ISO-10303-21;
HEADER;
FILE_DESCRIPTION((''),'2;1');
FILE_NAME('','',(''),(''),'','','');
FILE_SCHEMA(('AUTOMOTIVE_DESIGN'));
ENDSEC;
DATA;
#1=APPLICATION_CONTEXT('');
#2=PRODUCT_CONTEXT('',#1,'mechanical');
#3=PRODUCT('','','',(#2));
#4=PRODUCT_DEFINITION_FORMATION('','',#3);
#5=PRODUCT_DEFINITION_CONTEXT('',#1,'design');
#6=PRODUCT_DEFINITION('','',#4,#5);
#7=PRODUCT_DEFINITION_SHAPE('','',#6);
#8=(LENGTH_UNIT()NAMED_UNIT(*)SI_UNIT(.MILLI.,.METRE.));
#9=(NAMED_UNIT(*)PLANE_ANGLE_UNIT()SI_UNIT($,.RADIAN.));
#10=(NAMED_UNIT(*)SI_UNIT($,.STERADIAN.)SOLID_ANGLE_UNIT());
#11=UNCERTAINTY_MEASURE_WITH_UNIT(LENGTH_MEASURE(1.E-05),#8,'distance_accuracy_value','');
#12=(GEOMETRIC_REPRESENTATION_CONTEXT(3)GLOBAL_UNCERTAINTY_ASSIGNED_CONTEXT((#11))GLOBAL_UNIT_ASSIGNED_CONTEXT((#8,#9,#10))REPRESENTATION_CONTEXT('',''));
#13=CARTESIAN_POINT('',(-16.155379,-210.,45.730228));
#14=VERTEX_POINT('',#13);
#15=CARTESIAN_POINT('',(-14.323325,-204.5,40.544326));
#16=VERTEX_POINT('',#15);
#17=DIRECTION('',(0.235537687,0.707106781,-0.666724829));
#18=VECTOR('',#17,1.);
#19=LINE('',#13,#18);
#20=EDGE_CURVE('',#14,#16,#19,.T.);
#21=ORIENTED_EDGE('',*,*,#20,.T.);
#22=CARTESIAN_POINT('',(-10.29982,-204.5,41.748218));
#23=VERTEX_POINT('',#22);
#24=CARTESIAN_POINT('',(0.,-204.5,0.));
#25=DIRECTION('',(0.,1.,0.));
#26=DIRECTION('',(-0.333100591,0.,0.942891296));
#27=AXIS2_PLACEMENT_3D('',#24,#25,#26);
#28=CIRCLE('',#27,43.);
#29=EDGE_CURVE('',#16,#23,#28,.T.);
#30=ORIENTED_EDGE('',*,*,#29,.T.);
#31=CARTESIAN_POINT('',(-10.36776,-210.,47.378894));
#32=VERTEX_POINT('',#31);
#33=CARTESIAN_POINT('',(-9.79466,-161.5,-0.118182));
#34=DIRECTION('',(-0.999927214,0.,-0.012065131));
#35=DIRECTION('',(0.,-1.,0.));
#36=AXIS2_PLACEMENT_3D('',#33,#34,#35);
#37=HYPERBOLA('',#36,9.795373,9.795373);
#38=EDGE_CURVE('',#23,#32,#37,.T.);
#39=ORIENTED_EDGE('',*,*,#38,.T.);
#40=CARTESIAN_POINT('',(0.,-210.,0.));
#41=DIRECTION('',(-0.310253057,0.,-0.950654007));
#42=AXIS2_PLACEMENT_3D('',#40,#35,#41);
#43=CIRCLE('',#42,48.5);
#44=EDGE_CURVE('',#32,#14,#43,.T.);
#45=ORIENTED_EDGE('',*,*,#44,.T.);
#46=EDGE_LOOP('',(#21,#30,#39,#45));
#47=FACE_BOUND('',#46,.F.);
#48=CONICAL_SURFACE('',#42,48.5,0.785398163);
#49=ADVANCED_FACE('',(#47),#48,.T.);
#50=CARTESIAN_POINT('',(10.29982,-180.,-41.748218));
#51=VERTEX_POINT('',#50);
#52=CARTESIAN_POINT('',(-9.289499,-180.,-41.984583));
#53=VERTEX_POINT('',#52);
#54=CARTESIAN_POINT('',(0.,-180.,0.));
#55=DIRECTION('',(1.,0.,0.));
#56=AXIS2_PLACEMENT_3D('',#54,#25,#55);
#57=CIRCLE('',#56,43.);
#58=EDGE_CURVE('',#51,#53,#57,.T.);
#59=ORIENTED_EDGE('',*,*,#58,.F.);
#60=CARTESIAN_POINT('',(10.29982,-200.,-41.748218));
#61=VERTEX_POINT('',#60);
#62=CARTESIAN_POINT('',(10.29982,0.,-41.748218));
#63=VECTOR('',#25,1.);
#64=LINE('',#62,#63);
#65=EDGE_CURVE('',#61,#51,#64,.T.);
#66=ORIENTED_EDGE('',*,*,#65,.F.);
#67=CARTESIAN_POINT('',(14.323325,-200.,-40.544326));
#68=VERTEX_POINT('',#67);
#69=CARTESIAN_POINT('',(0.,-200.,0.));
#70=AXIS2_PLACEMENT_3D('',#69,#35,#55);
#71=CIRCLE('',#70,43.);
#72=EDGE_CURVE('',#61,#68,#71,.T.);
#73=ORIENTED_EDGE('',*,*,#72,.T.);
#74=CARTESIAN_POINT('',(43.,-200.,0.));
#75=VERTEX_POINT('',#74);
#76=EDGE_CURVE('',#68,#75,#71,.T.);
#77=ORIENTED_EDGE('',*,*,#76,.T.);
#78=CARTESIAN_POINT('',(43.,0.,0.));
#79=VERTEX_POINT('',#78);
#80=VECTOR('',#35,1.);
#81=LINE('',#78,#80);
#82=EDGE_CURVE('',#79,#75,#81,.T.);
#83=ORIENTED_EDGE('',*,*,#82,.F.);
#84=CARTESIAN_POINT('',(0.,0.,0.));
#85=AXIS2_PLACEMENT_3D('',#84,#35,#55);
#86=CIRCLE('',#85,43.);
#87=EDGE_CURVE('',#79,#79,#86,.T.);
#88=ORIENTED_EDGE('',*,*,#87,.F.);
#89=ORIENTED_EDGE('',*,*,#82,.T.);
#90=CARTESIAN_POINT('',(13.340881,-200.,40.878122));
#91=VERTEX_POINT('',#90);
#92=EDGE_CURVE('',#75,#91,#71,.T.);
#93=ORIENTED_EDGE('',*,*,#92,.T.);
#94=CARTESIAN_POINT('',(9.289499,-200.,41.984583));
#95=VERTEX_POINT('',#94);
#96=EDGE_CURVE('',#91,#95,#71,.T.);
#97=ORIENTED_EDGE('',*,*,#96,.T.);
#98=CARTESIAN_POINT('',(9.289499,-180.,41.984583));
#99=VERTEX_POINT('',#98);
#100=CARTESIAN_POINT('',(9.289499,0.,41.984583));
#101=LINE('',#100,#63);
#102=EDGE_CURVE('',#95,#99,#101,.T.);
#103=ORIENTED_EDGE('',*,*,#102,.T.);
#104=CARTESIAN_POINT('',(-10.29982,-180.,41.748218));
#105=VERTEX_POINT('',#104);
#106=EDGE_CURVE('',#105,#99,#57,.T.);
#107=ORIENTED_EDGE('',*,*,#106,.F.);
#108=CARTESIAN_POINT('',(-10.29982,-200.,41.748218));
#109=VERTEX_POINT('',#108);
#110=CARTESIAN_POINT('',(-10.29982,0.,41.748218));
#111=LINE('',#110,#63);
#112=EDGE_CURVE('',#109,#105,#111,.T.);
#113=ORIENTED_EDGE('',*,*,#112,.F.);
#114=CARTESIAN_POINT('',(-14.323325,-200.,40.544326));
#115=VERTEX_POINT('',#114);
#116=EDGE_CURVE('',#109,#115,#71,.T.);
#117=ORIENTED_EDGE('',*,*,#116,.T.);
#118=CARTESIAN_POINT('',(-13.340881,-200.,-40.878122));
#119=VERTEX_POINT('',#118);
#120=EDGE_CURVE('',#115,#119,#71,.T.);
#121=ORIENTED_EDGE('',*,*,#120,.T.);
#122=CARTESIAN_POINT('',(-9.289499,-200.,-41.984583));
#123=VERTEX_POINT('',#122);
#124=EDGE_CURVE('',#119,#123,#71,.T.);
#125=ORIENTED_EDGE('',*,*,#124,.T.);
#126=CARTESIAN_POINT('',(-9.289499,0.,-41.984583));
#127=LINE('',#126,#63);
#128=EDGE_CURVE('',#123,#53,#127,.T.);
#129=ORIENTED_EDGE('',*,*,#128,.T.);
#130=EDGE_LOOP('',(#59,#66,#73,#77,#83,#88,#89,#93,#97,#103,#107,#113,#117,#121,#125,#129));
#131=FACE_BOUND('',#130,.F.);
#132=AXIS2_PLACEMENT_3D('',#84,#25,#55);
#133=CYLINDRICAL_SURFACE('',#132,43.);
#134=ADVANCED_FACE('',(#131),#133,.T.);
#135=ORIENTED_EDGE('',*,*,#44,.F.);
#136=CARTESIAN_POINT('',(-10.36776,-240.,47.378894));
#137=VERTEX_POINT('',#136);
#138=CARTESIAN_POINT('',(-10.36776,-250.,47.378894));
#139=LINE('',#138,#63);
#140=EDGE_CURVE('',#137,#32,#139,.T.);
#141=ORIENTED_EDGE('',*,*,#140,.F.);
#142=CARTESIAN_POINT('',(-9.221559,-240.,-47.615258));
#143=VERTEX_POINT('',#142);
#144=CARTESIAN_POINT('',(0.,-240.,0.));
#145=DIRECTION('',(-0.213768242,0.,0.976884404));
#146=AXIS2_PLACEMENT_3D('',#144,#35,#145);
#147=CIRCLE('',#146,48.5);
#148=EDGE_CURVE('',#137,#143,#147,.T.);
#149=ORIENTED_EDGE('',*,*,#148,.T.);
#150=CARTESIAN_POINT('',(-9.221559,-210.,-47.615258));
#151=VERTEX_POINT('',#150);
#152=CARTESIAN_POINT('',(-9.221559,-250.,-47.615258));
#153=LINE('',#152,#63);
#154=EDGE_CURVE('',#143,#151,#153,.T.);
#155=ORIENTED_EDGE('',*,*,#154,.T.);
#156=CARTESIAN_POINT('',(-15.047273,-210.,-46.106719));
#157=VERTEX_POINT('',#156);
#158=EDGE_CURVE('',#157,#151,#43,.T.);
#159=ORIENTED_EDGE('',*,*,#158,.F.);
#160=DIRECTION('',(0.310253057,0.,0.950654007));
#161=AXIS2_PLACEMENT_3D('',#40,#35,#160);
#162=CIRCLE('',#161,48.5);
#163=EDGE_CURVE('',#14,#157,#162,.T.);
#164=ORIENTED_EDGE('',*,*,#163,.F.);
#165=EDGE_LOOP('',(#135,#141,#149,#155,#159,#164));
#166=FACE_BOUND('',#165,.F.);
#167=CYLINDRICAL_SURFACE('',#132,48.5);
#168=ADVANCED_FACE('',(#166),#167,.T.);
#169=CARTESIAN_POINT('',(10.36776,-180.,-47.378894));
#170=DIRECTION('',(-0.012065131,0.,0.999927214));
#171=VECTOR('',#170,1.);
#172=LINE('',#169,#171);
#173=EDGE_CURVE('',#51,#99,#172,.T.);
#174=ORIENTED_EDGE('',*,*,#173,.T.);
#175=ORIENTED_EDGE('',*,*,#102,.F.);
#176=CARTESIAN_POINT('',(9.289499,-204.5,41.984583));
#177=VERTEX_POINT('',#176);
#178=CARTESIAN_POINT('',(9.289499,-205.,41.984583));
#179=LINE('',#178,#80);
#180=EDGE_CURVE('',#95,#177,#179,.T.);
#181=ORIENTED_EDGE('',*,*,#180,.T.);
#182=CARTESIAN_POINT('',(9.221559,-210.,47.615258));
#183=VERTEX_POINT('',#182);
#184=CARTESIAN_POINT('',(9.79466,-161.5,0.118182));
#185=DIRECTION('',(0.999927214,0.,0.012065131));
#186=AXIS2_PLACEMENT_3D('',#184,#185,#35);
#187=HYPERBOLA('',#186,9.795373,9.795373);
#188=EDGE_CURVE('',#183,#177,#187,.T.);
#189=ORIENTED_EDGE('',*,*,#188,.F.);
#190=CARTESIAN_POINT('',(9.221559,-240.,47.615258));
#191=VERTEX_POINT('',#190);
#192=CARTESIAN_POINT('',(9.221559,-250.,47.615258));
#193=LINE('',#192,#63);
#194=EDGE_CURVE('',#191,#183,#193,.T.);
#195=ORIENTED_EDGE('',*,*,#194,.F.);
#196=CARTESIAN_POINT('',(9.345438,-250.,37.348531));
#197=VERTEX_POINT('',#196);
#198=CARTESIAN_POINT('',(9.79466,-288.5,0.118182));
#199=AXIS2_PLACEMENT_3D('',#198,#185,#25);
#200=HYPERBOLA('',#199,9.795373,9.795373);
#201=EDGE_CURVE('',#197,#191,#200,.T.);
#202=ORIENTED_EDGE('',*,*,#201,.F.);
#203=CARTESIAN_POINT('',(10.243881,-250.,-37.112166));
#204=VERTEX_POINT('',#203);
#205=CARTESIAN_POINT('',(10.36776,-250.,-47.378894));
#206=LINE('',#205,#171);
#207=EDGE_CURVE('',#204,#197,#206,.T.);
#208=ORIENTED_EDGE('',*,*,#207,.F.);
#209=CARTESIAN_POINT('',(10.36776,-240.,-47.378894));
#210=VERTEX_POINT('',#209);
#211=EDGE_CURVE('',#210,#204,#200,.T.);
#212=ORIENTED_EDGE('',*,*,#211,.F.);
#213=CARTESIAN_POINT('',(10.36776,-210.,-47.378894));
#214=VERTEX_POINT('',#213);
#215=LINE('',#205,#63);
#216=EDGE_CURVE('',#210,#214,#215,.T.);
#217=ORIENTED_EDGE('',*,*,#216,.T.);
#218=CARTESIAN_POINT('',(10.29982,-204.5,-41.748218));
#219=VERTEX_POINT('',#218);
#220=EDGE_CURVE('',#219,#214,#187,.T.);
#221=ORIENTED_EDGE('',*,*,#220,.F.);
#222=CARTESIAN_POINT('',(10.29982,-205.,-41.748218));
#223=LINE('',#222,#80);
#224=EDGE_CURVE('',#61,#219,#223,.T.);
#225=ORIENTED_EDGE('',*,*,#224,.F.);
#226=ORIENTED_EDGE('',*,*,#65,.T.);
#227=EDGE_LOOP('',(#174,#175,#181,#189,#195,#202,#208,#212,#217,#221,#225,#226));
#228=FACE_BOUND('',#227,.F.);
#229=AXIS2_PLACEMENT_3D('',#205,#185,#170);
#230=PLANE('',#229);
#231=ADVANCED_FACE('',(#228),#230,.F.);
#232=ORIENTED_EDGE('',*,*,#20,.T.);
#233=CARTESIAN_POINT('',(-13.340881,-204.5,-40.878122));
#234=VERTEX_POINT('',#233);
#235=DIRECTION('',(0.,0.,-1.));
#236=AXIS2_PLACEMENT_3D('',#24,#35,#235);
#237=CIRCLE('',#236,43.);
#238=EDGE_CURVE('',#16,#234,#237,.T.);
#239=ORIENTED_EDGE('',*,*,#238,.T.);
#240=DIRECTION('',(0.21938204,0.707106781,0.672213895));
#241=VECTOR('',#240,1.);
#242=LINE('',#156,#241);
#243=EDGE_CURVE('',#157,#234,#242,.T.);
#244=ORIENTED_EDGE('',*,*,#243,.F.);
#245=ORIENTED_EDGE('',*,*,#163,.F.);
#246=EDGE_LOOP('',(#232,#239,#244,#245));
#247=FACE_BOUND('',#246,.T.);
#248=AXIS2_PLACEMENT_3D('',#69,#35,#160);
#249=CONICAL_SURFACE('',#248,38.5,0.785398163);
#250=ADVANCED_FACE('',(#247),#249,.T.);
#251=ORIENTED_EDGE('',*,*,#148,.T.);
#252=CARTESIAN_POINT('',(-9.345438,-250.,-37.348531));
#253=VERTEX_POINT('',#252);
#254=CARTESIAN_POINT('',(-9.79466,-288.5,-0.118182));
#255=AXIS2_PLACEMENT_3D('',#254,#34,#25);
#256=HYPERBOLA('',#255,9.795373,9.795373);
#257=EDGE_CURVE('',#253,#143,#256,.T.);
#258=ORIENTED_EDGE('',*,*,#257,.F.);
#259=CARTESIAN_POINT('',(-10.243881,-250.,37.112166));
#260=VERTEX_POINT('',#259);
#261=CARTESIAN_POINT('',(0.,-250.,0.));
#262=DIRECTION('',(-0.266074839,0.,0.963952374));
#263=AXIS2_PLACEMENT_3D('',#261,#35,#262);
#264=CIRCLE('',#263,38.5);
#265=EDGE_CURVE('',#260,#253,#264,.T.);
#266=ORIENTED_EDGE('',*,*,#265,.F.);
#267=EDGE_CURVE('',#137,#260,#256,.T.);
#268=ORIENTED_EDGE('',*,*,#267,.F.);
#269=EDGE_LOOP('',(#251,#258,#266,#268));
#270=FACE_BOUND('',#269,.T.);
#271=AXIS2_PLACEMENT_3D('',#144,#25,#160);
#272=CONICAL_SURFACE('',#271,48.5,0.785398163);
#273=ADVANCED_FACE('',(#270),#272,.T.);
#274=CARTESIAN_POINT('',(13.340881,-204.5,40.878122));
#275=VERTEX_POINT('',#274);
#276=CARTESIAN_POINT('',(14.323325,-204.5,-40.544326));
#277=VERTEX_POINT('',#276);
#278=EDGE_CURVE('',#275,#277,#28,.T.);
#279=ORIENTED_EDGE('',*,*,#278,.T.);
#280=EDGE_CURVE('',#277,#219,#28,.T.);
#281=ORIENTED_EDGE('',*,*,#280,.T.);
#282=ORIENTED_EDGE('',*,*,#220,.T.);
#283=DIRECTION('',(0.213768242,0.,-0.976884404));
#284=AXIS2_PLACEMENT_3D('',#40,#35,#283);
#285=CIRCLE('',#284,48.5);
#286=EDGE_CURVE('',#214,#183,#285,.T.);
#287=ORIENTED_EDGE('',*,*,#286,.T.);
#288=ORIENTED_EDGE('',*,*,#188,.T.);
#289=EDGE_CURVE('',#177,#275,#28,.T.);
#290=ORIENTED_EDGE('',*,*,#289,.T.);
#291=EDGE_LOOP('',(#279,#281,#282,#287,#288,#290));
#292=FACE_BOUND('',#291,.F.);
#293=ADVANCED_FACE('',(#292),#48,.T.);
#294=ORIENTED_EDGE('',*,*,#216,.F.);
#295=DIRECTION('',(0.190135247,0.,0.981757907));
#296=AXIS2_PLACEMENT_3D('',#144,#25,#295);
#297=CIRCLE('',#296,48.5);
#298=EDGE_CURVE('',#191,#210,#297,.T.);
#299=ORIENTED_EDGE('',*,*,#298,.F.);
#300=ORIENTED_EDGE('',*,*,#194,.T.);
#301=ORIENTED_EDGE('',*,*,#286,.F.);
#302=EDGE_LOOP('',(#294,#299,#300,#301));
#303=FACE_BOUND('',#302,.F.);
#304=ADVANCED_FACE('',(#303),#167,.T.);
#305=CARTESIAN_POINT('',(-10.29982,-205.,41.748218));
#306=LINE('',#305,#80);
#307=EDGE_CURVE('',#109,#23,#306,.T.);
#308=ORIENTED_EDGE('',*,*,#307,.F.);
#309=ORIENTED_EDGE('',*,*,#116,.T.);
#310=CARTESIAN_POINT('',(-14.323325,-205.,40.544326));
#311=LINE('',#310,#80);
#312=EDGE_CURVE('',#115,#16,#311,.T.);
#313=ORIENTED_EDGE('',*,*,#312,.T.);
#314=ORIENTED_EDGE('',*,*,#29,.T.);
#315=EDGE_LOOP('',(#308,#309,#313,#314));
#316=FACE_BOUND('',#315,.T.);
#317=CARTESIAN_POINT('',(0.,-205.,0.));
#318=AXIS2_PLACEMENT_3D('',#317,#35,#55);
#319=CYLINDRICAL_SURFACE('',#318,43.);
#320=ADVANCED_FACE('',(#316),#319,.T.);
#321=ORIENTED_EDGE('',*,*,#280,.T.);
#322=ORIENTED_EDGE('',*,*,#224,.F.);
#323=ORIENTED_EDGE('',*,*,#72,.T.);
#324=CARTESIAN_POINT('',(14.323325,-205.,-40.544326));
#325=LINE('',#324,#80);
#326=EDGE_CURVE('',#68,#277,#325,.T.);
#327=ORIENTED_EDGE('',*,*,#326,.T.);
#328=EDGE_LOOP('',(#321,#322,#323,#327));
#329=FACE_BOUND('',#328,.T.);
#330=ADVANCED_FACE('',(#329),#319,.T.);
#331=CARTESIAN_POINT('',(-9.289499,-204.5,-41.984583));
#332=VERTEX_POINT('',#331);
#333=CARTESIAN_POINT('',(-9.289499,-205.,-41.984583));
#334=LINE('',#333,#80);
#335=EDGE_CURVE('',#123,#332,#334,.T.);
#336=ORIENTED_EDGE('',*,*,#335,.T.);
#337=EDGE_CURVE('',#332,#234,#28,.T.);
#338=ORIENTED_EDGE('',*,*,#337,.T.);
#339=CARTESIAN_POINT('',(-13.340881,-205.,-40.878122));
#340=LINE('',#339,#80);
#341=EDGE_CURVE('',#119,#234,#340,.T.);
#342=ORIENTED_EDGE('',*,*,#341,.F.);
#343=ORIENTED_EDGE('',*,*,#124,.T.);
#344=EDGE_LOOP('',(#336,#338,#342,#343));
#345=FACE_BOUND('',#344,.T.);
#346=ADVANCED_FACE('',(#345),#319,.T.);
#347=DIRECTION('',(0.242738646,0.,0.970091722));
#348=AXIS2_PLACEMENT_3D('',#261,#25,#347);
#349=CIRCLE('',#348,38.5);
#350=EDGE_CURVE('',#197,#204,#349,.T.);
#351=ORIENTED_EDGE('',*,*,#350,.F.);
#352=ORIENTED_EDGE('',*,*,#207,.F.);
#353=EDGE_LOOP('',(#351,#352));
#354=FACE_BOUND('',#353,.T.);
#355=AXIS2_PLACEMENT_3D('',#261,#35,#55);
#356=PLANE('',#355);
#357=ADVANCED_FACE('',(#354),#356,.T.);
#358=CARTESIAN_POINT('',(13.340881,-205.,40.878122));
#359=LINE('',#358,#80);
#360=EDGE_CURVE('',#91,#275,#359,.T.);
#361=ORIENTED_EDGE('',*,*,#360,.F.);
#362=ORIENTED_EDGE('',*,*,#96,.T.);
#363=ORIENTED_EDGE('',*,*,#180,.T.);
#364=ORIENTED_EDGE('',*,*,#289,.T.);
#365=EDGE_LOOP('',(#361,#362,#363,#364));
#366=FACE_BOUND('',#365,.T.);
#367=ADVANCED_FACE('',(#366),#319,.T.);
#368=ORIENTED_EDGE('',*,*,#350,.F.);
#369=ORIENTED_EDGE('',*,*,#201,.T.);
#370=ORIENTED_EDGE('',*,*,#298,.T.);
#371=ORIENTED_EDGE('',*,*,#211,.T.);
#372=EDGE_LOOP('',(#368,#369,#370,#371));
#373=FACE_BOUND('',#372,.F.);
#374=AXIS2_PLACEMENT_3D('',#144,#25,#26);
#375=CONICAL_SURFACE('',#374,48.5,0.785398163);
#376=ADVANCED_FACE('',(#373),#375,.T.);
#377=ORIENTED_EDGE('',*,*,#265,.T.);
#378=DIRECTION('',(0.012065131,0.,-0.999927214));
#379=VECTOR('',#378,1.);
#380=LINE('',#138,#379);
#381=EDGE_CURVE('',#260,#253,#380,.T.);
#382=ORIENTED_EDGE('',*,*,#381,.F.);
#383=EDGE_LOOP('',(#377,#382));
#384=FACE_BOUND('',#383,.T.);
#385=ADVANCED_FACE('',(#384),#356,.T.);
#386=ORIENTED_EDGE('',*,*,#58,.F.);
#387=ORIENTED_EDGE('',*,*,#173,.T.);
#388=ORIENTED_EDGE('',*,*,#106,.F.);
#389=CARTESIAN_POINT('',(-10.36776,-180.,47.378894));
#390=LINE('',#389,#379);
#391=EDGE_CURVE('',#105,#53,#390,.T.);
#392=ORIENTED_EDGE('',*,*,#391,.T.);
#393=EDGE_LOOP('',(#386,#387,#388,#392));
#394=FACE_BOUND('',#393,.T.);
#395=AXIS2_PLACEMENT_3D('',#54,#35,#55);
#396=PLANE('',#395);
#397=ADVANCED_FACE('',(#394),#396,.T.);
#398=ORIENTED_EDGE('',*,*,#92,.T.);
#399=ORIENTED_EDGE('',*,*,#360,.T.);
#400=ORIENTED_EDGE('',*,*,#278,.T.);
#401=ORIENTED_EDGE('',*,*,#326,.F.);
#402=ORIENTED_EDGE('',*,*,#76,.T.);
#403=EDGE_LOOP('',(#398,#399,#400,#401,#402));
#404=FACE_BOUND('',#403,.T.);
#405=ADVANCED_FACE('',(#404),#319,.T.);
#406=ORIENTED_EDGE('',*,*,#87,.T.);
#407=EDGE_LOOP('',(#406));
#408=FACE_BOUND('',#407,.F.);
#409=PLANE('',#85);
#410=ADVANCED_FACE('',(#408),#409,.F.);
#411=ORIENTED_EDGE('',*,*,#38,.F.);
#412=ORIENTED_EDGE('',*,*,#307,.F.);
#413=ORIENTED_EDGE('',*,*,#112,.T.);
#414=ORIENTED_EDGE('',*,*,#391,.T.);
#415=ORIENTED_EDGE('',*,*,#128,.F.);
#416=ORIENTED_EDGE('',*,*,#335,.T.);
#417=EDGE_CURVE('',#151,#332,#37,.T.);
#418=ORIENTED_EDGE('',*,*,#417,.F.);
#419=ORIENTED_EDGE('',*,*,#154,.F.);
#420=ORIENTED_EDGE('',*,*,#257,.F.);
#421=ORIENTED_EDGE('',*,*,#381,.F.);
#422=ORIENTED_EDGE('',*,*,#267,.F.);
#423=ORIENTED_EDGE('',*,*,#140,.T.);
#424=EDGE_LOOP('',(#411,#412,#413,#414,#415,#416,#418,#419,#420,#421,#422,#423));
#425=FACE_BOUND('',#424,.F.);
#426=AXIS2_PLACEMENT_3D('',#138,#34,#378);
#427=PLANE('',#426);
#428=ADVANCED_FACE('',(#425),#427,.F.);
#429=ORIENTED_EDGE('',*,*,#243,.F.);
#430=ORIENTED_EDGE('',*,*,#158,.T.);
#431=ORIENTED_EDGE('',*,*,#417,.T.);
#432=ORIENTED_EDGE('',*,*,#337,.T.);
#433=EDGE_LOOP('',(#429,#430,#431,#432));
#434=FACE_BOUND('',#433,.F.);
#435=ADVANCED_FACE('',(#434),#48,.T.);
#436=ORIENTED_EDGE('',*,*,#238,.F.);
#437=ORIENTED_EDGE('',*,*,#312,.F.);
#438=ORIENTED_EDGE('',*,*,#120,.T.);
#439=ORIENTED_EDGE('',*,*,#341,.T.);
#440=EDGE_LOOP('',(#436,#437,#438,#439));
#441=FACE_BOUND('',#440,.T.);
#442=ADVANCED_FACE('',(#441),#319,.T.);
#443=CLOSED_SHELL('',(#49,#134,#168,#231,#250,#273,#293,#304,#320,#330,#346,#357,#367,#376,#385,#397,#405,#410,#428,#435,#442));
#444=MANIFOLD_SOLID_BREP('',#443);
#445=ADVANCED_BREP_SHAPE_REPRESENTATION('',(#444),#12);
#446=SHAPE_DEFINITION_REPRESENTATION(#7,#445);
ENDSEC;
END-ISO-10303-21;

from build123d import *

# Parameters (mm, degrees)
F0_R         = 48.5
F0_R_2       = 43
F1_DEPTH     = 250
F2_DEPTH     = 200
F4_DEPTH     = 70
F5_T2_ANGLE  = 217.5315587112
F5_T4_ANGLE  = 217.5315587112
F5_T8_ANGLE  = 217.5315587112
F5_S9_R      = 43
F5_T10_DEPTH = 60
F5_T14_ANGLE = 217.5315587112
F5_S15_R     = 43
F5_T16_DEPTH = 60


# Not quite as in the source:
# - a fillet or chamfer that OpenCascade refuses, or shapes differently, is made with other operations: its cross-section is extruded or revolved along the edge and cut away or added


with BuildPart() as f1:
    # F0 (on Front) → F1 (new body)
    with BuildSketch(Plane.XZ):
        Circle(F0_R)
        Circle(F0_R_2, mode=Mode.SUBTRACT)
        Circle(F0_R_2)
    extrude(amount=F1_DEPTH)

    # F0 (on Front) → F2 (cut)
    with BuildSketch(Plane.XZ):
        Circle(F0_R)
        Circle(F0_R_2, mode=Mode.SUBTRACT)
    extrude(amount=F2_DEPTH, mode=Mode.SUBTRACT)

    # F3 (on face) → F4 (cut)
    with BuildSketch(Plane.XZ.offset(250)):
        with BuildLine():
            Line((10.3677597397, -47.3788935918), (9.2215594636, 47.6152584899))
            ThreePointArc((9.2215594636, 47.6152584899), (-0.5851588327, 48.4964698627), (-10.3677597397, 47.3788935918))
            Line((-10.3677597397, 47.3788935918), (-9.2215594636, -47.6152584899))
            ThreePointArc((-9.2215594636, -47.6152584899), (0.5851588327, -48.4964698627), (10.3677597397, -47.3788935918))
        make_face()
    extrude(amount=-F4_DEPTH, mode=Mode.SUBTRACT)

    # F5: chamfer of 10 on 4 edges, made by hand

    # F5_s1 → F5_t2 (revolve, cut)
    with BuildSketch(Plane(origin=(0, 0, 0), x_dir=(0, 1, 0), z_dir=(0.9506540069, 0, -0.3102530567))):
        Polygon((-240, 48.5), (-250, 38.5), (-250, 48.5), align=None)
    revolve(axis=Axis((0, -250, 0), (0, -1, 0)), revolution_arc=F5_T2_ANGLE, mode=Mode.SUBTRACT)

    # F5_s3 → F5_t4 (revolve, cut)
    with BuildSketch(Plane(origin=(0, 0, 0), x_dir=(0, 1, 0), z_dir=(-0.9428912961, 0, -0.3331005911))):
        Polygon((-240, -48.5), (-250, -38.5), (-250, -48.5), align=None)
    revolve(axis=Axis((0, -250, 0), (0, 1, 0)), revolution_arc=F5_T4_ANGLE, mode=Mode.SUBTRACT)


with BuildPart() as f5_tool6:
    # F5_s7 → F5_t8 (revolve)
    with BuildSketch(Plane(origin=(0, 0, 0), x_dir=(0, 1, 0), z_dir=(-0.9506540069, 0, 0.3102530567))):
        Polygon((-210, 48.5), (-200, 38.5), (-200, 48.5), align=None)
    revolve(axis=Axis((0, -200, 0), (0, -1, 0)), revolution_arc=F5_T8_ANGLE)

    # F5_s9 → F5_t10 (cut, symmetric)
    with BuildSketch(Plane.XZ.offset(205)):
        Circle(F5_S9_R)
    extrude(amount=F5_T10_DEPTH, both=True, mode=Mode.SUBTRACT)


with BuildPart() as f1_1:
    add(f1.part)

    # F5_t5: cut F5_tool6
    add(f5_tool6.part, mode=Mode.SUBTRACT)


with BuildPart() as f5_tool12:
    # F5_s13 → F5_t14 (revolve)
    with BuildSketch(Plane(origin=(0, 0, 0), x_dir=(0, 1, 0), z_dir=(0.9506540069, 0, -0.3102530567))):
        Polygon((-200, 38.5), (-210, 48.5), (-200, 48.5), align=None)
    revolve(axis=Axis((0, -200, 0), (0, -1, 0)), revolution_arc=F5_T14_ANGLE)

    # F5_s15 → F5_t16 (cut, symmetric)
    with BuildSketch(Plane.XZ.offset(205)):
        Circle(F5_S15_R)
    extrude(amount=F5_T16_DEPTH, both=True, mode=Mode.SUBTRACT)


with BuildPart() as f1_2:
    add(f1_1.part)

    # F5_t11: cut F5_tool12
    add(f5_tool12.part, mode=Mode.SUBTRACT)


solid = f1_2.part
